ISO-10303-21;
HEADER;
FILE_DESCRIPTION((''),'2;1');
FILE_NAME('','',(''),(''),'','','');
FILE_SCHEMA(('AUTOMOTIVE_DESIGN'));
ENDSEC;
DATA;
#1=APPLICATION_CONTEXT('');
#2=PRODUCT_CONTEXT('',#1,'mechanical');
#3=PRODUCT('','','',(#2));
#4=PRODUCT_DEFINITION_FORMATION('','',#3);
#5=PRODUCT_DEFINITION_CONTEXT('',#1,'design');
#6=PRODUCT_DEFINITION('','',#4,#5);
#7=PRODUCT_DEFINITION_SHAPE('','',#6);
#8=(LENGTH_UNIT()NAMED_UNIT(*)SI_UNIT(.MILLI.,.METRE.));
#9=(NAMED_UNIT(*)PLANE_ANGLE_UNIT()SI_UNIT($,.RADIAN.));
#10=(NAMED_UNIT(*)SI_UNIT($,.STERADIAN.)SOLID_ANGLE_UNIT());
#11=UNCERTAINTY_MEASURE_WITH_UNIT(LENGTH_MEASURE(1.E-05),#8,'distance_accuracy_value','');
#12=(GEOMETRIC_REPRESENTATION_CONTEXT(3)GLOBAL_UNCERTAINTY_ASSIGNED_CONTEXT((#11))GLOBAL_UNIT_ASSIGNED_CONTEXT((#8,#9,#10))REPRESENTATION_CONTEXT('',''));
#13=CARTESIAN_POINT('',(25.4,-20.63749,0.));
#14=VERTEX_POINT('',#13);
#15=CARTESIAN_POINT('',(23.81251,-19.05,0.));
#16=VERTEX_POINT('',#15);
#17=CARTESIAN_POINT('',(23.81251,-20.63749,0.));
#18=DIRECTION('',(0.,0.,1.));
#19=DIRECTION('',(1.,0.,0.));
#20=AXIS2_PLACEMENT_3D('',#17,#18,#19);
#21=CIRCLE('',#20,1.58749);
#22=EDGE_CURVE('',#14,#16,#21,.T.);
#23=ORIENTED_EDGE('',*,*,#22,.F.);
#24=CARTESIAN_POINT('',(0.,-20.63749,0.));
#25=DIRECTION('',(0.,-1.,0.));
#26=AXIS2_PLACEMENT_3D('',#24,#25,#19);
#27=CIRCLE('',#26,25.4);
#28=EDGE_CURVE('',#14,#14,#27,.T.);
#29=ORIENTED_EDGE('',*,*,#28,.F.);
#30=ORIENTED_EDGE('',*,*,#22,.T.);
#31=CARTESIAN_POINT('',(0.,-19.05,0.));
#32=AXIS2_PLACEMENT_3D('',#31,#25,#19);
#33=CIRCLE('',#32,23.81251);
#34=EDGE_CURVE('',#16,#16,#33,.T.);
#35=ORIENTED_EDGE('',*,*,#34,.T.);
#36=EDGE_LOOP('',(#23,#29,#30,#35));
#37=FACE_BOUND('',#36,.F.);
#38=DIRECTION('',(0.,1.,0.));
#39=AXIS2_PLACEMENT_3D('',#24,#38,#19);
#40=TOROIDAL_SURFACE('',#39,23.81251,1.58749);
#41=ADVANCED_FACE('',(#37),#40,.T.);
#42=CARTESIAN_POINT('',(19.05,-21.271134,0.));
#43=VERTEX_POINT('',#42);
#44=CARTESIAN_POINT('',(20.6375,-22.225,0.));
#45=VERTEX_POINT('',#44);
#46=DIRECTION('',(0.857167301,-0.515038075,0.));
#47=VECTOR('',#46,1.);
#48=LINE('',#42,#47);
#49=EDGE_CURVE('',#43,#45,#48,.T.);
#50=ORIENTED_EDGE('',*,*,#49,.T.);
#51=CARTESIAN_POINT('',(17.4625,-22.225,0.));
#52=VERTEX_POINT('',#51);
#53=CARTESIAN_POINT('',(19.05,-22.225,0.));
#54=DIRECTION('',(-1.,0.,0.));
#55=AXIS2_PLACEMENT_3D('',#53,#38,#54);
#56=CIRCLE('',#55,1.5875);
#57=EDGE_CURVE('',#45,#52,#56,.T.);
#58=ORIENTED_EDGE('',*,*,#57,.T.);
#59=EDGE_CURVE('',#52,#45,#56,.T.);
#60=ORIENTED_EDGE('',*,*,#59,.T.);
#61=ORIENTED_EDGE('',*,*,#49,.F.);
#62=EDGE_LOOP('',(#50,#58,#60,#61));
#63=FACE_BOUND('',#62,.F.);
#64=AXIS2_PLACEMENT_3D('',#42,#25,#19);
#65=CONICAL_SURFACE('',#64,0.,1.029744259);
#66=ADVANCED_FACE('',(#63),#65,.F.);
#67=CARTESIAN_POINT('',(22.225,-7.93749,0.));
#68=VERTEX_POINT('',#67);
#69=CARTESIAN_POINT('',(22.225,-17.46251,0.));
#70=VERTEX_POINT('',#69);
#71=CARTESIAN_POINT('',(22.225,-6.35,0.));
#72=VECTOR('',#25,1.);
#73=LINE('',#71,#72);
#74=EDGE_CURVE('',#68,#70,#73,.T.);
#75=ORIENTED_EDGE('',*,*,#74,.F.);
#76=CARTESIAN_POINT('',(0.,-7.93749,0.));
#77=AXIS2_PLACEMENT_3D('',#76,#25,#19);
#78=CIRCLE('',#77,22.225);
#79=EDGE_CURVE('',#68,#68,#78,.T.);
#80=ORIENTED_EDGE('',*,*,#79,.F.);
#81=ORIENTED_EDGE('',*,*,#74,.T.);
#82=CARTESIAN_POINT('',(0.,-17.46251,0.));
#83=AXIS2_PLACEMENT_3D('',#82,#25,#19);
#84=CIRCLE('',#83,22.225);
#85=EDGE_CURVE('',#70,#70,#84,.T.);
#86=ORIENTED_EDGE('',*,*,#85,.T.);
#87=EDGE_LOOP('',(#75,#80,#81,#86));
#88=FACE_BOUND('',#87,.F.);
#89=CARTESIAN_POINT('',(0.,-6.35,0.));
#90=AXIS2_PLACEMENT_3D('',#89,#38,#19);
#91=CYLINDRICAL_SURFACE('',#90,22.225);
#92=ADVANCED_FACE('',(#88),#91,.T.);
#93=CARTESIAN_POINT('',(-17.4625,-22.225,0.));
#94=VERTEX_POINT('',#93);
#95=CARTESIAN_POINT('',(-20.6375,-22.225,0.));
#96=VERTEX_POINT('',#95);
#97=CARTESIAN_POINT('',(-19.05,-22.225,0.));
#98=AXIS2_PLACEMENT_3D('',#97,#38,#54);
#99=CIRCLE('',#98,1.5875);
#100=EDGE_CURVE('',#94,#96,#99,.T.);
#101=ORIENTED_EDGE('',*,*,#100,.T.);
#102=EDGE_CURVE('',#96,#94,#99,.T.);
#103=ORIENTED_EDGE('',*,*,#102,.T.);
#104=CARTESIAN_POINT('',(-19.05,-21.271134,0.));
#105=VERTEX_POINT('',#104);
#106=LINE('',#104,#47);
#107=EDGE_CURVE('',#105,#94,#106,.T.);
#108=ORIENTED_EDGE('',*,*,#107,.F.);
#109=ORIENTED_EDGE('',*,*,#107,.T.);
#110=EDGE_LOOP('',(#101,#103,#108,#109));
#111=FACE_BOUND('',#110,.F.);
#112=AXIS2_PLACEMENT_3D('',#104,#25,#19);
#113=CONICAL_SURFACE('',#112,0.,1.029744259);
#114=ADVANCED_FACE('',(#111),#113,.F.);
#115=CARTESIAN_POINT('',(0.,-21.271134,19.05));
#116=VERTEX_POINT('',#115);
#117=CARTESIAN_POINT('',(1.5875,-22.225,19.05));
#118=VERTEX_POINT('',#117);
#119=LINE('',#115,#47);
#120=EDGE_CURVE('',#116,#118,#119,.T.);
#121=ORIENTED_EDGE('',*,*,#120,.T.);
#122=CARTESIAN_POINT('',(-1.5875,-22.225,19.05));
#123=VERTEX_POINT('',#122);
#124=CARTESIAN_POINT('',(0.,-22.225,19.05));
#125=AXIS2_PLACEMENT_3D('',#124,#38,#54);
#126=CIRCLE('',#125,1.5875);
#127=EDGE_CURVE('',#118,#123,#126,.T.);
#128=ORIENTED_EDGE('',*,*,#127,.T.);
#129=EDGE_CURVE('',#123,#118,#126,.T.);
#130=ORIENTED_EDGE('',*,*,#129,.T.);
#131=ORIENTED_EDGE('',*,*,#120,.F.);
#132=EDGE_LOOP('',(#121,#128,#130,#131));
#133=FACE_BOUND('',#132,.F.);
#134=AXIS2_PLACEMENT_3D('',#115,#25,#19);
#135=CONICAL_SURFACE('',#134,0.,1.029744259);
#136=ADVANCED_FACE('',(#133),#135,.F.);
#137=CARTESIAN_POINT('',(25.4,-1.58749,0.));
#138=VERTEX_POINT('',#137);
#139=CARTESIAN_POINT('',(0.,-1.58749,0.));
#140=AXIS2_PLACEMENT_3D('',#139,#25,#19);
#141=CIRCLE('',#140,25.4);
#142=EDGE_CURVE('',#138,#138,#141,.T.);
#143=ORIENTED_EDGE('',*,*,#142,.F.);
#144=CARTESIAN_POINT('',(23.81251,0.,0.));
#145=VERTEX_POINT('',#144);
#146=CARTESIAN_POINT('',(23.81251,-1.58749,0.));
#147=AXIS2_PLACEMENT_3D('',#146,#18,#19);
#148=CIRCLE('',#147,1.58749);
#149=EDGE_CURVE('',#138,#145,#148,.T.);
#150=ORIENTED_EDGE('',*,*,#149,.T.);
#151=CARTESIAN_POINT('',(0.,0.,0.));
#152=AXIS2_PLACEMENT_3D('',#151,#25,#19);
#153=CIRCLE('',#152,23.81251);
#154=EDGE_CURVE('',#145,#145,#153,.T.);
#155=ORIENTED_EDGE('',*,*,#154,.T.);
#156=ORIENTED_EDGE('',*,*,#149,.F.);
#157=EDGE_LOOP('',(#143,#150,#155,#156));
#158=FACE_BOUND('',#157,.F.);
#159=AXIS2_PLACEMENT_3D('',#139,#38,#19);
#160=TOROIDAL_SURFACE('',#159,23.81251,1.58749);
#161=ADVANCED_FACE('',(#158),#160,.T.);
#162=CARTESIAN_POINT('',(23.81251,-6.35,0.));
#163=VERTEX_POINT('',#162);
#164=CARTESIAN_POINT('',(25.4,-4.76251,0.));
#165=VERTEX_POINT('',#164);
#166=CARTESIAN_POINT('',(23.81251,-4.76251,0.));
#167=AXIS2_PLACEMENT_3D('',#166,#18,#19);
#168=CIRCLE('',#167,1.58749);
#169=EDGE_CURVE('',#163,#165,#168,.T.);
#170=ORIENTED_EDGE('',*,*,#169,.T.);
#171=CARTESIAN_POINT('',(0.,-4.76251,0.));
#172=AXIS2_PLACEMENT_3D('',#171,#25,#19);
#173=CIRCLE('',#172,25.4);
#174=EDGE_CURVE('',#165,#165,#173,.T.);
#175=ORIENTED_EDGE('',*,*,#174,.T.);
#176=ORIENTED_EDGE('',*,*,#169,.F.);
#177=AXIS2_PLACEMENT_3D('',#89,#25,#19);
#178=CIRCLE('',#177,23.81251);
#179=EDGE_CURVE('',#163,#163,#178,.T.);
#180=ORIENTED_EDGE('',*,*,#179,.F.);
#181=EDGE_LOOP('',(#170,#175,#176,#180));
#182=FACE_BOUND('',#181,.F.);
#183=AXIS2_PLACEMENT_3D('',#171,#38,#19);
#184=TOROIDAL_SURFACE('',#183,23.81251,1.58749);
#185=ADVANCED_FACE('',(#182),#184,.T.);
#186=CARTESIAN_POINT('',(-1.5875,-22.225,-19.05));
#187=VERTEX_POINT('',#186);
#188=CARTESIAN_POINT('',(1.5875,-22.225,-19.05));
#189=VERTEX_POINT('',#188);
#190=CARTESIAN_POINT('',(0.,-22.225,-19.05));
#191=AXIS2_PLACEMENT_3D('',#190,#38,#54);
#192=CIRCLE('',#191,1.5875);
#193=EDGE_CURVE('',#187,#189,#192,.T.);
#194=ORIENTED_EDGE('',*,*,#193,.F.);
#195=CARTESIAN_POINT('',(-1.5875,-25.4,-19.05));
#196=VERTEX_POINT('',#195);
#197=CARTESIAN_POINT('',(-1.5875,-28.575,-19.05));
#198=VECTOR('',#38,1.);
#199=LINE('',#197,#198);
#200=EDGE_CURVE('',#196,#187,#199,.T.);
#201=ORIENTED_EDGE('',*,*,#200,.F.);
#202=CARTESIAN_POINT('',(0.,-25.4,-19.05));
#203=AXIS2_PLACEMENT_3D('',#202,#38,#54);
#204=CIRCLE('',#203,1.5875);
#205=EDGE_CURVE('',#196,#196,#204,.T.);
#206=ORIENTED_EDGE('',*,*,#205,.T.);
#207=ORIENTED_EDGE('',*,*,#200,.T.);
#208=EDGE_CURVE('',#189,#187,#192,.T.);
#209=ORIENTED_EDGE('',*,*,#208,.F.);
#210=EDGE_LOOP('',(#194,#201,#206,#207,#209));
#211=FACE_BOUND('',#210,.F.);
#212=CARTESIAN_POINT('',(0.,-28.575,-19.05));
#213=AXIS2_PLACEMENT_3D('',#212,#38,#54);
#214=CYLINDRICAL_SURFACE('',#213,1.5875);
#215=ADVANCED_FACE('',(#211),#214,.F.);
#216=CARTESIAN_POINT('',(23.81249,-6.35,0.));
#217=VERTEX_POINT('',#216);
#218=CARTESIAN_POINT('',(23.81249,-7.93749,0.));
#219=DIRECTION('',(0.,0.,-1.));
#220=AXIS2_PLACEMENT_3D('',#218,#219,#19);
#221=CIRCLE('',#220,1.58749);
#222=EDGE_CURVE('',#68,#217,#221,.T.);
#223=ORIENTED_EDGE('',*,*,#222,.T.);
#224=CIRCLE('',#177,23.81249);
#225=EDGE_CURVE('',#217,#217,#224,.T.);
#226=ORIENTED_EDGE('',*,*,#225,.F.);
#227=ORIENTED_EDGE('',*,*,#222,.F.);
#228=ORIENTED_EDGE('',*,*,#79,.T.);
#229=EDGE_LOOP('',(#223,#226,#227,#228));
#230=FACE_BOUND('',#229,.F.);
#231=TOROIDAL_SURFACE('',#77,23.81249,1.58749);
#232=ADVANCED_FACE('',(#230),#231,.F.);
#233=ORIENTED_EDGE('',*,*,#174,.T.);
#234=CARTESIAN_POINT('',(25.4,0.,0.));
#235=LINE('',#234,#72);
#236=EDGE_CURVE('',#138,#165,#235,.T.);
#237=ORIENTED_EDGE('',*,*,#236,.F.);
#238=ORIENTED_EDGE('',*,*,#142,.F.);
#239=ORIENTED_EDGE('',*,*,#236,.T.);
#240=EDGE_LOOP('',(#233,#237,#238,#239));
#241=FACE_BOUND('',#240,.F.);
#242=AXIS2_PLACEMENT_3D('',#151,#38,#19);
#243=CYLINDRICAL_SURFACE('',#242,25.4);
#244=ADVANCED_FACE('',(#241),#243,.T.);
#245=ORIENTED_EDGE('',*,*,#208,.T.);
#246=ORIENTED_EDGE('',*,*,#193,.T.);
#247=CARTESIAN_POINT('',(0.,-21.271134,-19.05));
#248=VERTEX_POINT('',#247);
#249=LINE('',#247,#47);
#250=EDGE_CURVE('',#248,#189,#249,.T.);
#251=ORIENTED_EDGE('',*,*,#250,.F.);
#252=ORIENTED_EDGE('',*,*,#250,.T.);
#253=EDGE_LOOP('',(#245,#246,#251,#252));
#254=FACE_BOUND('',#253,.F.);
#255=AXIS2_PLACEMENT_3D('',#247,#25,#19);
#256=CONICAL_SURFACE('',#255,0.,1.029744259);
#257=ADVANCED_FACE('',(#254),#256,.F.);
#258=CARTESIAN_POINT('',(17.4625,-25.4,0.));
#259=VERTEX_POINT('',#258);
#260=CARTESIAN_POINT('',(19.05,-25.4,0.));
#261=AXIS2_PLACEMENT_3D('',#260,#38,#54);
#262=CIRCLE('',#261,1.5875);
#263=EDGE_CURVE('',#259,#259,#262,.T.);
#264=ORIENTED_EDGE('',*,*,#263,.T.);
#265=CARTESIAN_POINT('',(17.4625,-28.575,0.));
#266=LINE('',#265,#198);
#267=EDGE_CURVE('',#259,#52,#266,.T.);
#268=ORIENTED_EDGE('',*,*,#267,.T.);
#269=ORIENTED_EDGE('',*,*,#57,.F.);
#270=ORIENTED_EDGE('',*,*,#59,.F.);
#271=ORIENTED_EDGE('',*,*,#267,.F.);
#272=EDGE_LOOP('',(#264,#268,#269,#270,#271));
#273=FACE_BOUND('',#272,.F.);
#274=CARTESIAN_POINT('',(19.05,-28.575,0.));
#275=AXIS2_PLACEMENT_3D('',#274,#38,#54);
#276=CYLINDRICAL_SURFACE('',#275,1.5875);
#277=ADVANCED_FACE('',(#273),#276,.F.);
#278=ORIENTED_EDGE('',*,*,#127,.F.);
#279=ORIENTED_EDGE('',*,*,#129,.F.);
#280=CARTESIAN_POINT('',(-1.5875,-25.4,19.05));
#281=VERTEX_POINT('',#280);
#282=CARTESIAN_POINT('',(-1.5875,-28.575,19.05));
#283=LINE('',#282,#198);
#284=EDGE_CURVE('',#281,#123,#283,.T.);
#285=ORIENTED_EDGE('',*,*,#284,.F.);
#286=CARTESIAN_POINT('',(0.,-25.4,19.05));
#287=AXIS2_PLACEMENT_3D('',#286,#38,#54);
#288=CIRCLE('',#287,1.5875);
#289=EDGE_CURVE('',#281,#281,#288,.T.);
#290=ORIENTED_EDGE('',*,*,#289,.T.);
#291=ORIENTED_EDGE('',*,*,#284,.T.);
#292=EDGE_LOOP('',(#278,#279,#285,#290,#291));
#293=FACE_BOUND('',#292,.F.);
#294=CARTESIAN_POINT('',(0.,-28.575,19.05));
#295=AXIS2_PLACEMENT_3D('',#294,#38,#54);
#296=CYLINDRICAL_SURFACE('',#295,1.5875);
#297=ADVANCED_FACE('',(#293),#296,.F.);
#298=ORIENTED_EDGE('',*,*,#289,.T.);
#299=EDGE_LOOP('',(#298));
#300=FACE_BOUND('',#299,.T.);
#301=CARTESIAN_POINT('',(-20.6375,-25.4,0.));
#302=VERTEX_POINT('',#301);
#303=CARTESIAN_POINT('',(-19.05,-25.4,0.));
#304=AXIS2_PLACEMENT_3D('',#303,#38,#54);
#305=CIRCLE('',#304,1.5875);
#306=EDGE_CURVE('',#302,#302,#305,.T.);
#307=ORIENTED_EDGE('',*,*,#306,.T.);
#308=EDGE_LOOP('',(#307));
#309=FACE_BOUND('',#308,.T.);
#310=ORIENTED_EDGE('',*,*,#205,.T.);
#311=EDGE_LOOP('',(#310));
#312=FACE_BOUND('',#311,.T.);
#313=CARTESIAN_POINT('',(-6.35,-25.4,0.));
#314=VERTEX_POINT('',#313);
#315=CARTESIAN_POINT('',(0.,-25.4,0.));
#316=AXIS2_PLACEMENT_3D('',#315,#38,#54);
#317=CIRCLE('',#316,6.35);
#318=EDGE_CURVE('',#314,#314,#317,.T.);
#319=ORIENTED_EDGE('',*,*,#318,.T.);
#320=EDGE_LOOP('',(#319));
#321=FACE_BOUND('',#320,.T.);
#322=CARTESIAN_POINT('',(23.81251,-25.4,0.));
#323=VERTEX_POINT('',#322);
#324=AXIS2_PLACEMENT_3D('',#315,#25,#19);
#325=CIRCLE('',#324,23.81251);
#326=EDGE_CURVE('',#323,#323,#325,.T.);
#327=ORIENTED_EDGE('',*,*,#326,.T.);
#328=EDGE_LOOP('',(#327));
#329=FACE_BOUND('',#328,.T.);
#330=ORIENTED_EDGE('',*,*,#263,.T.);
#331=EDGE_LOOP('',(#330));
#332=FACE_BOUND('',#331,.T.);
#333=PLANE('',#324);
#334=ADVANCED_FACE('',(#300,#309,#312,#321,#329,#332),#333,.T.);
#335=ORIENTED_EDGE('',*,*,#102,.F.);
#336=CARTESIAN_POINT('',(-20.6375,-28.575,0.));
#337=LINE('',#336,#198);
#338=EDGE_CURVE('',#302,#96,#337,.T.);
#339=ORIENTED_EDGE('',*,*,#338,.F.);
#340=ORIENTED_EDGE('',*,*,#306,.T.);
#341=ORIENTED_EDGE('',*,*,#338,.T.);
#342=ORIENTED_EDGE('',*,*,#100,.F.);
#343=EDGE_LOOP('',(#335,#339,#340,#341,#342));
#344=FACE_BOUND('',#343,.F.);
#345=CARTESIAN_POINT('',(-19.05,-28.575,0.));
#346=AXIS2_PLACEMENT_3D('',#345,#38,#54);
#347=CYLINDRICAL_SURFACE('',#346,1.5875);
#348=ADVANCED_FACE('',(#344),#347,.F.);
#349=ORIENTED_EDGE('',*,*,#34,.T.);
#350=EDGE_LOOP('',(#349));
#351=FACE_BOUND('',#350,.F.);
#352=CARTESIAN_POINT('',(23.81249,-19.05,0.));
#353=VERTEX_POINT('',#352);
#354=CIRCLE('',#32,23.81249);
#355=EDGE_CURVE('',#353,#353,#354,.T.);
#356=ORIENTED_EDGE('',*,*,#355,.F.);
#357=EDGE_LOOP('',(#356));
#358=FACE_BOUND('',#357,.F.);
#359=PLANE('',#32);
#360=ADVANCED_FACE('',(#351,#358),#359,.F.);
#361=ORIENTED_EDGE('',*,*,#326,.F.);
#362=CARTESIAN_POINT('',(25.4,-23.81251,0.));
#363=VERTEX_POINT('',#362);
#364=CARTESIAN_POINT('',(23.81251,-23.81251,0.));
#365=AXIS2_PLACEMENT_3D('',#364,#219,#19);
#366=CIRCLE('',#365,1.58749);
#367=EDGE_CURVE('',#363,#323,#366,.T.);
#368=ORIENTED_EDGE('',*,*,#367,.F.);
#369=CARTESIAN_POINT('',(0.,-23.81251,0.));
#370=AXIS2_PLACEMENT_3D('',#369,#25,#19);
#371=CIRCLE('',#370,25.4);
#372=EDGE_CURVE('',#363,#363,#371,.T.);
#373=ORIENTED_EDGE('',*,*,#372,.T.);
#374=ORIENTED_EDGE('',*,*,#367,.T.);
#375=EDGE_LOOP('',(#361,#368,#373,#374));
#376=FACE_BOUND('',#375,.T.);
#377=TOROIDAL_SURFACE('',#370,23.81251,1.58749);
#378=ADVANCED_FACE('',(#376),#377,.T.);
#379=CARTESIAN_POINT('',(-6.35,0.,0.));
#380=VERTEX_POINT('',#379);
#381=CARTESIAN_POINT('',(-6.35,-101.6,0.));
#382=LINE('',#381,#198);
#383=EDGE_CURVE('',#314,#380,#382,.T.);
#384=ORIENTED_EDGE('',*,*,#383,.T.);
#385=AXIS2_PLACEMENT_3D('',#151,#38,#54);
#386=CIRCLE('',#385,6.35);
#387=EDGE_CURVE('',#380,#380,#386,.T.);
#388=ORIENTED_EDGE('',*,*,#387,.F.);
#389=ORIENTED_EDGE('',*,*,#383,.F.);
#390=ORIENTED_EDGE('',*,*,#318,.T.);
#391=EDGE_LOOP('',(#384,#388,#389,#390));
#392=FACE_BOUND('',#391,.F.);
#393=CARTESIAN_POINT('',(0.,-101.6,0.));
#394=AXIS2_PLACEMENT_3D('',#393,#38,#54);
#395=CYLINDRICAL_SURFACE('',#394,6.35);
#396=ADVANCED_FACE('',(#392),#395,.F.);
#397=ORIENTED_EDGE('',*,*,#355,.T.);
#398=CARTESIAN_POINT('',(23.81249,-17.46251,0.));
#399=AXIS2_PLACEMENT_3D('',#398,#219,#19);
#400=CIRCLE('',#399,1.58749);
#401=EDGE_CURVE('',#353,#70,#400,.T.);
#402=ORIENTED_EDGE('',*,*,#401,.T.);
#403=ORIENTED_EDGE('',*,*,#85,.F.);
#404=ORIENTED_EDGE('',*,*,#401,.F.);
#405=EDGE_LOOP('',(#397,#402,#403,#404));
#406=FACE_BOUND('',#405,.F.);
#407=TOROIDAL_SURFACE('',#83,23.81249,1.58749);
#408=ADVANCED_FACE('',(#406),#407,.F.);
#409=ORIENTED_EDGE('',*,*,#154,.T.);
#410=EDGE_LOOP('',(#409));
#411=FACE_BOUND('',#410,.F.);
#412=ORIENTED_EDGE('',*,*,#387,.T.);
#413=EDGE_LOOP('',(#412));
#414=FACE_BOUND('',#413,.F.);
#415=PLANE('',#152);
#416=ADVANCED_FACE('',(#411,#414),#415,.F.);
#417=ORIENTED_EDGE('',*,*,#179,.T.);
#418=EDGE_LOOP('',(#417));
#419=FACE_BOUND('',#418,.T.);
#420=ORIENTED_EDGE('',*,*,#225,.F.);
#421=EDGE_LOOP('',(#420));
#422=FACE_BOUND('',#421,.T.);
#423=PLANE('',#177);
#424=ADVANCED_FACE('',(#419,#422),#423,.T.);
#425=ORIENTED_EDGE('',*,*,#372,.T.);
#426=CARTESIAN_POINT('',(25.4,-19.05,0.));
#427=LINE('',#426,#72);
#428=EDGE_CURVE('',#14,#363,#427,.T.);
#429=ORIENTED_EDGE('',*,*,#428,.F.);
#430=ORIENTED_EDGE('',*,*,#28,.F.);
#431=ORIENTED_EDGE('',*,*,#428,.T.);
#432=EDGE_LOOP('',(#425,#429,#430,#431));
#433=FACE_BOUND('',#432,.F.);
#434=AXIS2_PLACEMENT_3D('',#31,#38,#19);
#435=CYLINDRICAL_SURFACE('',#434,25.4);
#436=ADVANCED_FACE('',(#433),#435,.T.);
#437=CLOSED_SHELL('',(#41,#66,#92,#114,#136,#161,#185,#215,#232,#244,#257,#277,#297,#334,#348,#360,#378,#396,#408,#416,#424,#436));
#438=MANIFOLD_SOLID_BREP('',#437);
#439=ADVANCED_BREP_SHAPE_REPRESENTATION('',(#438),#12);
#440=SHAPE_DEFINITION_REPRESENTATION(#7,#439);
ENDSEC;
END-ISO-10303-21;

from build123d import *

# Parameters (mm, degrees)
F0_R     = 25.4
F1_DEPTH = 6.35
F2_R     = 22.225
F3_DEPTH = 12.7
F4_R     = 25.4
F5_DEPTH = 6.35
F6_R     = 1.58749
F8_D     = 3.175
F8_DEPTH = 3.175
F8_TIP   = 0.9538662327
F9_D     = 12.7


# Not quite as in the source:
# - a fillet or chamfer is up to 0.001 mm smaller than in the source, because OpenCascade refuses the exact size


with BuildPart() as f1:
    # F0 (on Front) → F1 (new body)
    with BuildSketch(Plane.XZ):
        Circle(F0_R)
    extrude(amount=F1_DEPTH)

    # F2 (on face) → F3 (join)
    with BuildSketch(Plane.XZ.offset(6.35)):
        Circle(F2_R)
    extrude(amount=F3_DEPTH)

    # F4 (on face) → F5 (join)
    with BuildSketch(Plane.XZ.offset(19.05)):
        Circle(F4_R)
    extrude(amount=F5_DEPTH)

    # F6 (radius 1.5875 in the source; OpenCascade refuses exactly that, so slightly less here)
    f6_edges = [f1.edges().sort_by_distance(p)[0] for p in [
        (-25.4, 0, 0),
        (-25.4, -6.35, 0),
        (-25.4, -25.4, 0),
        (-25.4, -19.05, 0),
        (-22.225, -19.05, 0),
        (-22.225, -6.35, 0),
    ]]
    fillet(f6_edges, radius=F6_R)

    # F8
    with Locations(Plane.XZ.offset(25.4)):
        with Locations((0, 19.05), (19.05, 0), (0, -19.05), (-19.05, 0)):
            Hole(F8_D / 2, depth=F8_DEPTH)
            with Locations((0, 0, -(F8_DEPTH + F8_TIP / 2))):  # 118° drill point
                Cone(0, F8_D / 2, F8_TIP, mode=Mode.SUBTRACT)

    # F9 (through all)
    with Locations(Plane.XZ.offset(25.4)):
        with Locations((0, 0)):
            Hole(F9_D / 2)


solid = f1.part
